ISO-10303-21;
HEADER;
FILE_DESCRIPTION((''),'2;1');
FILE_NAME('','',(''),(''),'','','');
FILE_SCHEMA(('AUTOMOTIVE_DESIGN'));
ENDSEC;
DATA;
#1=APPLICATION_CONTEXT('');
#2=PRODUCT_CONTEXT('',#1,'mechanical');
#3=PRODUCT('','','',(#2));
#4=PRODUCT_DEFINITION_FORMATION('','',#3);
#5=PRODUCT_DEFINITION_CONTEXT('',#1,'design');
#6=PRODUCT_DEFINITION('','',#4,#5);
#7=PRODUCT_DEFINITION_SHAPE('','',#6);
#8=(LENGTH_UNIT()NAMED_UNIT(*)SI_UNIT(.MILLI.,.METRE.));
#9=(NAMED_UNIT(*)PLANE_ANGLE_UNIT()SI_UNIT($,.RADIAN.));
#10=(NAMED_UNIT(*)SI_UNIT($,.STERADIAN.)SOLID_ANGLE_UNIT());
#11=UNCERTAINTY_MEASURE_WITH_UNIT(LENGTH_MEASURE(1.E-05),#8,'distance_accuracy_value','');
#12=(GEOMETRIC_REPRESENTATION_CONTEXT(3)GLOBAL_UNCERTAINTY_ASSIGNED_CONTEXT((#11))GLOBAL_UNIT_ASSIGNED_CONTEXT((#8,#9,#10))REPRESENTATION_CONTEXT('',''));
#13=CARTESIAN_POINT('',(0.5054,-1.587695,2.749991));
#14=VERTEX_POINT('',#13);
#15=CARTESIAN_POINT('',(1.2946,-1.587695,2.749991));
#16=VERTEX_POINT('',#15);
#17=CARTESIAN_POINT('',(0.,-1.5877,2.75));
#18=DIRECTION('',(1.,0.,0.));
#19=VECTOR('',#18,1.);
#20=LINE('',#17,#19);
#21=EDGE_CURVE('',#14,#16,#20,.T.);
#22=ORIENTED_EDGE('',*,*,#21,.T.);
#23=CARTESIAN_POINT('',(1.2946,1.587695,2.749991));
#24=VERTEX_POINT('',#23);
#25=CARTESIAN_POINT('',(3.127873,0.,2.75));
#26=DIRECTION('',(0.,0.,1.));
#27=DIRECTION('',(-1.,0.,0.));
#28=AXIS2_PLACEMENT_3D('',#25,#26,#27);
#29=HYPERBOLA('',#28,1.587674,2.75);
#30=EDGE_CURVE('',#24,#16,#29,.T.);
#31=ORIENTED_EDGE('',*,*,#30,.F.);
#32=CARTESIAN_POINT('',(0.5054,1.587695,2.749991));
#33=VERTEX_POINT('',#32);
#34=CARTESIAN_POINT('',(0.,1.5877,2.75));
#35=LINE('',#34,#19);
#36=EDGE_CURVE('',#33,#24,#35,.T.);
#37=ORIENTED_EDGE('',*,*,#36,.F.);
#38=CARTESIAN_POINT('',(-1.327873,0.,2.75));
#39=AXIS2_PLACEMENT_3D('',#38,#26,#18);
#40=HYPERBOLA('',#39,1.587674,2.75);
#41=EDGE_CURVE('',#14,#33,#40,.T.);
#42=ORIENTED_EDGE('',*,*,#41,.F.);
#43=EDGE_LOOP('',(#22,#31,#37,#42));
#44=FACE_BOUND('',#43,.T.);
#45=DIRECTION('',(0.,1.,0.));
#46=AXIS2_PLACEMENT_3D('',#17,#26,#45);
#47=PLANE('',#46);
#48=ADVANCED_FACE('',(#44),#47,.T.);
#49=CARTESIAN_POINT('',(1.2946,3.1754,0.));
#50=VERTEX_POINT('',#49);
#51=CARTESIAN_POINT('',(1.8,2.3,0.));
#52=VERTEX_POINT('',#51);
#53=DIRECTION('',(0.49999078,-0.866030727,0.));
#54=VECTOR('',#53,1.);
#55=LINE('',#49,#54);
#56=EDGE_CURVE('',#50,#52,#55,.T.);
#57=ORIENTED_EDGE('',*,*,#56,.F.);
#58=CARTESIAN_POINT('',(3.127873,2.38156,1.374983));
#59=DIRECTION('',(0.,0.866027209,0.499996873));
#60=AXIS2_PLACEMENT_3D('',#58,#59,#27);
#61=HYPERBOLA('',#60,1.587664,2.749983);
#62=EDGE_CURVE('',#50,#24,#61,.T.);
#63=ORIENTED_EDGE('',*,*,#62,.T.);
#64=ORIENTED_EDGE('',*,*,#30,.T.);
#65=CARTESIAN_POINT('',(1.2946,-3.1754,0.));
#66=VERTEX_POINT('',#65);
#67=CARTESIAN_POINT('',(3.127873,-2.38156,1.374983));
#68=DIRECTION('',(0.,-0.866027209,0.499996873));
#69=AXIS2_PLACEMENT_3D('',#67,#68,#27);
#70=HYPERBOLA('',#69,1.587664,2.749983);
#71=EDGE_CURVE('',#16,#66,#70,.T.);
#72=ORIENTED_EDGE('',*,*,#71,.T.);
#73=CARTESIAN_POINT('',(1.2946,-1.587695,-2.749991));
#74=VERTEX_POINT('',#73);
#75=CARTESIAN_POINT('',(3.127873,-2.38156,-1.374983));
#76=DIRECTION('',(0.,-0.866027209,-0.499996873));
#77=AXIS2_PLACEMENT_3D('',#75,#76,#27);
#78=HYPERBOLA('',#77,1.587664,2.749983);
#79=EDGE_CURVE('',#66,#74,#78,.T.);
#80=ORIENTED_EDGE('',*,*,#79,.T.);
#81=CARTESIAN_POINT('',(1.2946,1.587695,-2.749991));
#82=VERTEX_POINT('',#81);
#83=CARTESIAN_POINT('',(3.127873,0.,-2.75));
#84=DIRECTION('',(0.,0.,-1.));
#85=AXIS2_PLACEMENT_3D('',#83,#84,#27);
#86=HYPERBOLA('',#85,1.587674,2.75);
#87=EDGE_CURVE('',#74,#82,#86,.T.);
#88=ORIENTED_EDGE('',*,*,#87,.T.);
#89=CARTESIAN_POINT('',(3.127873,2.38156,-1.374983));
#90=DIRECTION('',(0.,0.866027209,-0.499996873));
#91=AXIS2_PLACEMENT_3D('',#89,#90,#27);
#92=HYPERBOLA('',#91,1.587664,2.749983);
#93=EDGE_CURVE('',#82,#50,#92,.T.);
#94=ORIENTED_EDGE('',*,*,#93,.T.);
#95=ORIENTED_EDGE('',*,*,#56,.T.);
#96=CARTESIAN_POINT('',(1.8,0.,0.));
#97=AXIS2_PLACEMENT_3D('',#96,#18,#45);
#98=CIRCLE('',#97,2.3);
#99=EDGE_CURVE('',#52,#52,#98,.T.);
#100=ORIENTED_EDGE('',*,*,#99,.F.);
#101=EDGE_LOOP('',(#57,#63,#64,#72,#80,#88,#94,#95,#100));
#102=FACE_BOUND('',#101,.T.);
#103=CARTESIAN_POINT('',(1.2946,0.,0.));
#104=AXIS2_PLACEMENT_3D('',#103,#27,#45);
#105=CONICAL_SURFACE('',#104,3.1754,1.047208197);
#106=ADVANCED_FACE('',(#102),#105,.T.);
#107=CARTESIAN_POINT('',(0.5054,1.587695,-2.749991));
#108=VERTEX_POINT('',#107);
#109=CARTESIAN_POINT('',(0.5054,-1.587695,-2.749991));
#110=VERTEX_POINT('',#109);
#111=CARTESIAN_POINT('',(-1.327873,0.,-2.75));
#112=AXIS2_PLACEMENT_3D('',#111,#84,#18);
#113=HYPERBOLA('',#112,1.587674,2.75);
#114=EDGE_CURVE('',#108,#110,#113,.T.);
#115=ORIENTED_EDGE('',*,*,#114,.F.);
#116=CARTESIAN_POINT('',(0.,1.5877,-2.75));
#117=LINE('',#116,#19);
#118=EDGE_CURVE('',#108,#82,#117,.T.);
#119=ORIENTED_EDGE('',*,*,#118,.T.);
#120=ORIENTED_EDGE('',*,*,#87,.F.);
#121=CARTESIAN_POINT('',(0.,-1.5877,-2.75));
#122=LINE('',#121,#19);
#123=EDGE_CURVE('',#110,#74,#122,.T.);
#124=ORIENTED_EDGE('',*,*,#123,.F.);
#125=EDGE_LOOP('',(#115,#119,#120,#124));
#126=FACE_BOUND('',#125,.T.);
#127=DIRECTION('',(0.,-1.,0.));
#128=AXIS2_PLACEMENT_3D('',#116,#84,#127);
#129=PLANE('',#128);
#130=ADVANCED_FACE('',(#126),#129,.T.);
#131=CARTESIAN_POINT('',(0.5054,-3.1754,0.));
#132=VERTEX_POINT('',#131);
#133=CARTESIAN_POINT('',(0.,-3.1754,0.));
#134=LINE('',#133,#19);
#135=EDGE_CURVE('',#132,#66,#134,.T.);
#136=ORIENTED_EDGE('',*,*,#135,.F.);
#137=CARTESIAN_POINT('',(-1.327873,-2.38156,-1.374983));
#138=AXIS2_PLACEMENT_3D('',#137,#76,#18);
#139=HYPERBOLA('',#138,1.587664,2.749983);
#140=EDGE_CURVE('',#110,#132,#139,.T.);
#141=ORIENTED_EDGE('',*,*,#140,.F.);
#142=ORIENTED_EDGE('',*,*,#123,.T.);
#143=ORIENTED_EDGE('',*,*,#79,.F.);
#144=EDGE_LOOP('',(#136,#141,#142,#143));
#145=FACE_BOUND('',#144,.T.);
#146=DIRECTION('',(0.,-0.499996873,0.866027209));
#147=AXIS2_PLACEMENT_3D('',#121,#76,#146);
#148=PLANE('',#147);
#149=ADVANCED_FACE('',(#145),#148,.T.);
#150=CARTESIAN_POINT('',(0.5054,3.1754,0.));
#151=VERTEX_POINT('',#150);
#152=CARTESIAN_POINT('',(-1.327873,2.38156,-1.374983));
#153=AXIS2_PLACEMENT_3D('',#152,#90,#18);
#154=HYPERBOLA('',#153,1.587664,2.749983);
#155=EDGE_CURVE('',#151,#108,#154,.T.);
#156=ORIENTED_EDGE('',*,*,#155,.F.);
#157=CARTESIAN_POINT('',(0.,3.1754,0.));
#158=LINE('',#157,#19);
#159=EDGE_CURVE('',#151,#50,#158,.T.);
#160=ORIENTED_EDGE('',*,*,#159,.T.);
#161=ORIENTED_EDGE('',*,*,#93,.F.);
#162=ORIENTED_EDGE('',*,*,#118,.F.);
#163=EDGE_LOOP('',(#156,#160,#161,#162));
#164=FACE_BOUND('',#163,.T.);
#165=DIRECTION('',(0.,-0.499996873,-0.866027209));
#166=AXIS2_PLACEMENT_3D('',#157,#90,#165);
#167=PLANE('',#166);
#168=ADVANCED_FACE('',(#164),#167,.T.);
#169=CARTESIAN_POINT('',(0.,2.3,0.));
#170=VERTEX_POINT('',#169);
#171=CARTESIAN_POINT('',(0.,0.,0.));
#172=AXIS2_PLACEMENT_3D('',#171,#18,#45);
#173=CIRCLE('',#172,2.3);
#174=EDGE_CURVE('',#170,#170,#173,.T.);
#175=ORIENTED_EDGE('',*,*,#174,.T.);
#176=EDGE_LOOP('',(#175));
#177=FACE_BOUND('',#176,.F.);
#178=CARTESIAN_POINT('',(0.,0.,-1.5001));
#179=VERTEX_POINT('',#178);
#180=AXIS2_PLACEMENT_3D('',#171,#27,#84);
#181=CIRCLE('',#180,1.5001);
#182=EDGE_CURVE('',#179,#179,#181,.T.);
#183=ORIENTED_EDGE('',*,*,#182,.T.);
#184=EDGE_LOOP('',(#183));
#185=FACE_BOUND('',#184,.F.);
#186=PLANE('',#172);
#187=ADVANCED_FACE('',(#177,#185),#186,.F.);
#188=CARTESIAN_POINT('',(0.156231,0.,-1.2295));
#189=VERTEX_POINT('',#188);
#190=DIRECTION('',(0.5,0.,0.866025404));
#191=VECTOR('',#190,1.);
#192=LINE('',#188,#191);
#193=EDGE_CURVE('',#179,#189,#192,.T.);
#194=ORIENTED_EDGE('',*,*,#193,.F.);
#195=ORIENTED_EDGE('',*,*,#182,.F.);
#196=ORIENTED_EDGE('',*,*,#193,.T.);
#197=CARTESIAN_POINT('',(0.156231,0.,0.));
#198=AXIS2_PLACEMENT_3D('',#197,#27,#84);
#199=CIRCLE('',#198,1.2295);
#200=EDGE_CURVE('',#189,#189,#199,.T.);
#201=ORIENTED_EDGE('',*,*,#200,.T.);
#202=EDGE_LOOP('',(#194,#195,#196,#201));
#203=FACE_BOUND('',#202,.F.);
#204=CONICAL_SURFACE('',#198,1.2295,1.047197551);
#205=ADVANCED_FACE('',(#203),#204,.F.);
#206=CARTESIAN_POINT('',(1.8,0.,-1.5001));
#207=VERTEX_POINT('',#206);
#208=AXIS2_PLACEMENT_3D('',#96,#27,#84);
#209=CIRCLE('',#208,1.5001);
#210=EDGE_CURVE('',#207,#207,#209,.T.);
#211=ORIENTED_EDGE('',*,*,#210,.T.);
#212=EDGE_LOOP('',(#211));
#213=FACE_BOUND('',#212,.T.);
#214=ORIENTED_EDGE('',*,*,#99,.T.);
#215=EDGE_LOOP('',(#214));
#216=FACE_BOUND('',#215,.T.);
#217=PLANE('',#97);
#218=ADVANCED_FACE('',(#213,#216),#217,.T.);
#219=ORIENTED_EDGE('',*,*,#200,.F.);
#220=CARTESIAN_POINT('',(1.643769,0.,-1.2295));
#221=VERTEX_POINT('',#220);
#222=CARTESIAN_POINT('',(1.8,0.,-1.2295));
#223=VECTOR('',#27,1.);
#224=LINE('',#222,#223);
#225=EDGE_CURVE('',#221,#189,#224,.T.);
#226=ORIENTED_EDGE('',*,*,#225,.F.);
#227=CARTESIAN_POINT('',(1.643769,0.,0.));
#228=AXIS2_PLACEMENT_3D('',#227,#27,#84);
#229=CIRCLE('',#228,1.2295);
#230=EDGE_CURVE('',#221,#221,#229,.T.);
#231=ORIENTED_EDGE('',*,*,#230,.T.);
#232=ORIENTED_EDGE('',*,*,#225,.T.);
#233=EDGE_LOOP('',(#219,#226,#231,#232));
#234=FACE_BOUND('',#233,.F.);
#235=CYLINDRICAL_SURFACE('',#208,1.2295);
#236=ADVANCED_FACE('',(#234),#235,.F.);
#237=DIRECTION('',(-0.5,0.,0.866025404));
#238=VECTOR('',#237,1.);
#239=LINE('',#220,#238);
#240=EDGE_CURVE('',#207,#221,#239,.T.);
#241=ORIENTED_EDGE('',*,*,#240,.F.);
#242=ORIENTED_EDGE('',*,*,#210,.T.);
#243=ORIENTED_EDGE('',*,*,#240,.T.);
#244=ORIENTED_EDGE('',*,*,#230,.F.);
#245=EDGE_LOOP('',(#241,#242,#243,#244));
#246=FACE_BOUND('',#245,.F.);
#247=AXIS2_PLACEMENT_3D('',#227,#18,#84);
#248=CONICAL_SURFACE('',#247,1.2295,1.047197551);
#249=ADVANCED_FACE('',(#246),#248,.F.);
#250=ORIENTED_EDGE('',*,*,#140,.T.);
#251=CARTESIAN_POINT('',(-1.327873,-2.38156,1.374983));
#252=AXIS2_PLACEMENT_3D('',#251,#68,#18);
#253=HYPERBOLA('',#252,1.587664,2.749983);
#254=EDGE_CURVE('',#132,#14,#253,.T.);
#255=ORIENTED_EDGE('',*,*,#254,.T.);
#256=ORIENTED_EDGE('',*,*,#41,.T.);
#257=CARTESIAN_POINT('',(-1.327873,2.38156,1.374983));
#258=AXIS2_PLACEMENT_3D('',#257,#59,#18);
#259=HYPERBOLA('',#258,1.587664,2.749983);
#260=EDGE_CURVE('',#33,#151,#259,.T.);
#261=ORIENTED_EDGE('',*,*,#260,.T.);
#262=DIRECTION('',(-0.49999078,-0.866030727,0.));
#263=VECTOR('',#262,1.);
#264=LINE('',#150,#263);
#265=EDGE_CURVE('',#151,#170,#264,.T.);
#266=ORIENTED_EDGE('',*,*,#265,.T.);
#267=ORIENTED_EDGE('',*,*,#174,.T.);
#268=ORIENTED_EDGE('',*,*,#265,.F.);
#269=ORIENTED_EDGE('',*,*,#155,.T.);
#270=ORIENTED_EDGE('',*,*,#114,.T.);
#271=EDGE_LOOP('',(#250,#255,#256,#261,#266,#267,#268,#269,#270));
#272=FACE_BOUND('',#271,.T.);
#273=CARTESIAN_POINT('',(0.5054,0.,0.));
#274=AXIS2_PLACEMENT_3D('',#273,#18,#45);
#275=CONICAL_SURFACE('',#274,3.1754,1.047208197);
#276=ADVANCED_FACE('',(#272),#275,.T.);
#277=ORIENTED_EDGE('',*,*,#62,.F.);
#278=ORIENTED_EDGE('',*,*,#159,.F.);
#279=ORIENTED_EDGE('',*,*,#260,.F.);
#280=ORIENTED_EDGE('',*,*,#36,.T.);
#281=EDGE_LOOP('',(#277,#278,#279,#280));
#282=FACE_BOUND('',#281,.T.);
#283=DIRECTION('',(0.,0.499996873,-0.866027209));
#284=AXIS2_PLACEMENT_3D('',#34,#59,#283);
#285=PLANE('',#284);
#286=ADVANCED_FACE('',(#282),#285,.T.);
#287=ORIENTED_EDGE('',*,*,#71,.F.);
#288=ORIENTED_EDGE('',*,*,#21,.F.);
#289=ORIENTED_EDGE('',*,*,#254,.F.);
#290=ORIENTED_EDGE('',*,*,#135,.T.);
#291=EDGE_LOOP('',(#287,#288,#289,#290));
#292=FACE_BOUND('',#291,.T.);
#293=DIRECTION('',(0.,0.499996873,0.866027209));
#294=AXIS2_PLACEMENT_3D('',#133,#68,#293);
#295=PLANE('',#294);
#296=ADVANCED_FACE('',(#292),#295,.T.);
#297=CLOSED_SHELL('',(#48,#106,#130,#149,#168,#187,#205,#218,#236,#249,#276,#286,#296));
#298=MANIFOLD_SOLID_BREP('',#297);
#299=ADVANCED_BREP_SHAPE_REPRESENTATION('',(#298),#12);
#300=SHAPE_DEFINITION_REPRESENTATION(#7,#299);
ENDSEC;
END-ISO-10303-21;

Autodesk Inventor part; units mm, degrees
ref_plane "YZ Plane" through (0, 0, 0) normal (1, 0, 0) x (0, 1, 0)
ref_plane "XZ Plane" through (0, 0, 0) normal (0, 1, 0) x (-1, 0, 0)
sketch "Szkic1" plane through (0, 0, 0) normal (1, 0, 0) x (0, 1, 0)
  line L0 (-3.1754, 0) -> (-1.5877, 2.75)
  line L1 (-1.5877, 2.75) -> (1.5877, 2.75)
  line L2 (1.5877, 2.75) -> (3.1754, 0)
  line L3 (3.1754, 0) -> (1.5877, -2.75)
  line L4 (1.5877, -2.75) -> (-1.5877, -2.75)
  line L5 (-1.5877, -2.75) -> (-3.1754, 0)
  point P0 (0, 0)
  point P1 (0, 0)
  dimension "d0" = 6.3509
extrude "Bryła" add sketch "Szkic1" along normal blind 1.8
sketch "Szkic2" plane through (0, 0, 0) normal (0, 0, 1) x (1, 0, 0)
  line L0 (0, 1.5877) -> (0, 3.1754) projected
  line L1 (0, 3.1754) -> (1.8, 3.1754) projected
  line L2 (1.8, 1.5877) -> (1.8, 3.1754) projected
  line L3 (-0.36, 0) -> (2.16, 0) projected
  line L4 (0.5054, 3.1754) -> (0, 2.3)
  line L5 (1.2946, 3.1754) -> (1.8, 2.3)
  dimension "d3" = 30
  dimension "d4" = 30
  dimension "d5" = 4.6
  dimension "d6" = 4.6
revolve "Faza1" cut sketch "Szkic2" angle 360 about axis through (-10, 0, 0) along (1, 0, 0)
sketch "Szkic3" plane through (1.8, 0, 0) normal (1, 0, 0) x (0, 0, -1)
  arc A0 (-0.625, -1.0825) -> (0.625, -1.0825) centre (0, 0) ccw projected
hole "Gwint" at (1.8, 0, 0) direction (-1, 0, 0) diameter 2.459 end through all thread size "M3x0.5" class "6H" standard "ISO Metric profile"
chamfer "Faza2" distance 0.2706 angle 30 1 edges at (1.8, 0, 1.2295) measured on face at (1.8, 1.9179, -0.2329)
chamfer "Faza3" distance 0.2706 angle 30 1 edges at (0, 0, 1.2295) measured on face at (0, 1.9179, -0.2329)
ref_plane "Work Plane1" through (-6.7921, 0, 0) normal (0, -0.8660254, -0.5) x (1, 0, 0)
equation "\"d0\" = 1.1547 * SW"
equation "\"d1\" = KOH"
equation "\"d3\" = ANG1"
equation "\"d4\" = ANG2"
equation "\"d5\" = SW0"
equation "\"d6\" = SW01"
equation "\"d8\" = -0.5 * GD1 + 0.5 * NND"
equation "\"d40\" = -0.5 * GD1 + 0.5 * NND"
equation "\"d10\" = -0.5 * GD1 + 0.5 * NND"
equation "\"d41\" = -0.5 * GD1 + 0.5 * NND"
equation "\"ANG1\" = 30deg"
equation "\"ANG2\" = 30deg"
equation "\"NND\" = 3"
equation "\"KOH\" = 1.8"
equation "\"SW\" = 5.5"
equation "\"SW0\" = 4.6"
equation "\"SW01\" = 4.6"
equation "\"GUL\" = 0.541266 * PTC"
equation "\"THREADDIA\" = 3"
equation "\"TOA\" = 30deg"
equation "\"PTC\" = 0.5"
equation "\"E0\" = 1.155 * SW"
equation "\"GAL\" = 0.541266 * PTC"
equation "\"GD1\" = 2.458734"
properties part number "DIN 439 - M3" material "Stal, miękka"
